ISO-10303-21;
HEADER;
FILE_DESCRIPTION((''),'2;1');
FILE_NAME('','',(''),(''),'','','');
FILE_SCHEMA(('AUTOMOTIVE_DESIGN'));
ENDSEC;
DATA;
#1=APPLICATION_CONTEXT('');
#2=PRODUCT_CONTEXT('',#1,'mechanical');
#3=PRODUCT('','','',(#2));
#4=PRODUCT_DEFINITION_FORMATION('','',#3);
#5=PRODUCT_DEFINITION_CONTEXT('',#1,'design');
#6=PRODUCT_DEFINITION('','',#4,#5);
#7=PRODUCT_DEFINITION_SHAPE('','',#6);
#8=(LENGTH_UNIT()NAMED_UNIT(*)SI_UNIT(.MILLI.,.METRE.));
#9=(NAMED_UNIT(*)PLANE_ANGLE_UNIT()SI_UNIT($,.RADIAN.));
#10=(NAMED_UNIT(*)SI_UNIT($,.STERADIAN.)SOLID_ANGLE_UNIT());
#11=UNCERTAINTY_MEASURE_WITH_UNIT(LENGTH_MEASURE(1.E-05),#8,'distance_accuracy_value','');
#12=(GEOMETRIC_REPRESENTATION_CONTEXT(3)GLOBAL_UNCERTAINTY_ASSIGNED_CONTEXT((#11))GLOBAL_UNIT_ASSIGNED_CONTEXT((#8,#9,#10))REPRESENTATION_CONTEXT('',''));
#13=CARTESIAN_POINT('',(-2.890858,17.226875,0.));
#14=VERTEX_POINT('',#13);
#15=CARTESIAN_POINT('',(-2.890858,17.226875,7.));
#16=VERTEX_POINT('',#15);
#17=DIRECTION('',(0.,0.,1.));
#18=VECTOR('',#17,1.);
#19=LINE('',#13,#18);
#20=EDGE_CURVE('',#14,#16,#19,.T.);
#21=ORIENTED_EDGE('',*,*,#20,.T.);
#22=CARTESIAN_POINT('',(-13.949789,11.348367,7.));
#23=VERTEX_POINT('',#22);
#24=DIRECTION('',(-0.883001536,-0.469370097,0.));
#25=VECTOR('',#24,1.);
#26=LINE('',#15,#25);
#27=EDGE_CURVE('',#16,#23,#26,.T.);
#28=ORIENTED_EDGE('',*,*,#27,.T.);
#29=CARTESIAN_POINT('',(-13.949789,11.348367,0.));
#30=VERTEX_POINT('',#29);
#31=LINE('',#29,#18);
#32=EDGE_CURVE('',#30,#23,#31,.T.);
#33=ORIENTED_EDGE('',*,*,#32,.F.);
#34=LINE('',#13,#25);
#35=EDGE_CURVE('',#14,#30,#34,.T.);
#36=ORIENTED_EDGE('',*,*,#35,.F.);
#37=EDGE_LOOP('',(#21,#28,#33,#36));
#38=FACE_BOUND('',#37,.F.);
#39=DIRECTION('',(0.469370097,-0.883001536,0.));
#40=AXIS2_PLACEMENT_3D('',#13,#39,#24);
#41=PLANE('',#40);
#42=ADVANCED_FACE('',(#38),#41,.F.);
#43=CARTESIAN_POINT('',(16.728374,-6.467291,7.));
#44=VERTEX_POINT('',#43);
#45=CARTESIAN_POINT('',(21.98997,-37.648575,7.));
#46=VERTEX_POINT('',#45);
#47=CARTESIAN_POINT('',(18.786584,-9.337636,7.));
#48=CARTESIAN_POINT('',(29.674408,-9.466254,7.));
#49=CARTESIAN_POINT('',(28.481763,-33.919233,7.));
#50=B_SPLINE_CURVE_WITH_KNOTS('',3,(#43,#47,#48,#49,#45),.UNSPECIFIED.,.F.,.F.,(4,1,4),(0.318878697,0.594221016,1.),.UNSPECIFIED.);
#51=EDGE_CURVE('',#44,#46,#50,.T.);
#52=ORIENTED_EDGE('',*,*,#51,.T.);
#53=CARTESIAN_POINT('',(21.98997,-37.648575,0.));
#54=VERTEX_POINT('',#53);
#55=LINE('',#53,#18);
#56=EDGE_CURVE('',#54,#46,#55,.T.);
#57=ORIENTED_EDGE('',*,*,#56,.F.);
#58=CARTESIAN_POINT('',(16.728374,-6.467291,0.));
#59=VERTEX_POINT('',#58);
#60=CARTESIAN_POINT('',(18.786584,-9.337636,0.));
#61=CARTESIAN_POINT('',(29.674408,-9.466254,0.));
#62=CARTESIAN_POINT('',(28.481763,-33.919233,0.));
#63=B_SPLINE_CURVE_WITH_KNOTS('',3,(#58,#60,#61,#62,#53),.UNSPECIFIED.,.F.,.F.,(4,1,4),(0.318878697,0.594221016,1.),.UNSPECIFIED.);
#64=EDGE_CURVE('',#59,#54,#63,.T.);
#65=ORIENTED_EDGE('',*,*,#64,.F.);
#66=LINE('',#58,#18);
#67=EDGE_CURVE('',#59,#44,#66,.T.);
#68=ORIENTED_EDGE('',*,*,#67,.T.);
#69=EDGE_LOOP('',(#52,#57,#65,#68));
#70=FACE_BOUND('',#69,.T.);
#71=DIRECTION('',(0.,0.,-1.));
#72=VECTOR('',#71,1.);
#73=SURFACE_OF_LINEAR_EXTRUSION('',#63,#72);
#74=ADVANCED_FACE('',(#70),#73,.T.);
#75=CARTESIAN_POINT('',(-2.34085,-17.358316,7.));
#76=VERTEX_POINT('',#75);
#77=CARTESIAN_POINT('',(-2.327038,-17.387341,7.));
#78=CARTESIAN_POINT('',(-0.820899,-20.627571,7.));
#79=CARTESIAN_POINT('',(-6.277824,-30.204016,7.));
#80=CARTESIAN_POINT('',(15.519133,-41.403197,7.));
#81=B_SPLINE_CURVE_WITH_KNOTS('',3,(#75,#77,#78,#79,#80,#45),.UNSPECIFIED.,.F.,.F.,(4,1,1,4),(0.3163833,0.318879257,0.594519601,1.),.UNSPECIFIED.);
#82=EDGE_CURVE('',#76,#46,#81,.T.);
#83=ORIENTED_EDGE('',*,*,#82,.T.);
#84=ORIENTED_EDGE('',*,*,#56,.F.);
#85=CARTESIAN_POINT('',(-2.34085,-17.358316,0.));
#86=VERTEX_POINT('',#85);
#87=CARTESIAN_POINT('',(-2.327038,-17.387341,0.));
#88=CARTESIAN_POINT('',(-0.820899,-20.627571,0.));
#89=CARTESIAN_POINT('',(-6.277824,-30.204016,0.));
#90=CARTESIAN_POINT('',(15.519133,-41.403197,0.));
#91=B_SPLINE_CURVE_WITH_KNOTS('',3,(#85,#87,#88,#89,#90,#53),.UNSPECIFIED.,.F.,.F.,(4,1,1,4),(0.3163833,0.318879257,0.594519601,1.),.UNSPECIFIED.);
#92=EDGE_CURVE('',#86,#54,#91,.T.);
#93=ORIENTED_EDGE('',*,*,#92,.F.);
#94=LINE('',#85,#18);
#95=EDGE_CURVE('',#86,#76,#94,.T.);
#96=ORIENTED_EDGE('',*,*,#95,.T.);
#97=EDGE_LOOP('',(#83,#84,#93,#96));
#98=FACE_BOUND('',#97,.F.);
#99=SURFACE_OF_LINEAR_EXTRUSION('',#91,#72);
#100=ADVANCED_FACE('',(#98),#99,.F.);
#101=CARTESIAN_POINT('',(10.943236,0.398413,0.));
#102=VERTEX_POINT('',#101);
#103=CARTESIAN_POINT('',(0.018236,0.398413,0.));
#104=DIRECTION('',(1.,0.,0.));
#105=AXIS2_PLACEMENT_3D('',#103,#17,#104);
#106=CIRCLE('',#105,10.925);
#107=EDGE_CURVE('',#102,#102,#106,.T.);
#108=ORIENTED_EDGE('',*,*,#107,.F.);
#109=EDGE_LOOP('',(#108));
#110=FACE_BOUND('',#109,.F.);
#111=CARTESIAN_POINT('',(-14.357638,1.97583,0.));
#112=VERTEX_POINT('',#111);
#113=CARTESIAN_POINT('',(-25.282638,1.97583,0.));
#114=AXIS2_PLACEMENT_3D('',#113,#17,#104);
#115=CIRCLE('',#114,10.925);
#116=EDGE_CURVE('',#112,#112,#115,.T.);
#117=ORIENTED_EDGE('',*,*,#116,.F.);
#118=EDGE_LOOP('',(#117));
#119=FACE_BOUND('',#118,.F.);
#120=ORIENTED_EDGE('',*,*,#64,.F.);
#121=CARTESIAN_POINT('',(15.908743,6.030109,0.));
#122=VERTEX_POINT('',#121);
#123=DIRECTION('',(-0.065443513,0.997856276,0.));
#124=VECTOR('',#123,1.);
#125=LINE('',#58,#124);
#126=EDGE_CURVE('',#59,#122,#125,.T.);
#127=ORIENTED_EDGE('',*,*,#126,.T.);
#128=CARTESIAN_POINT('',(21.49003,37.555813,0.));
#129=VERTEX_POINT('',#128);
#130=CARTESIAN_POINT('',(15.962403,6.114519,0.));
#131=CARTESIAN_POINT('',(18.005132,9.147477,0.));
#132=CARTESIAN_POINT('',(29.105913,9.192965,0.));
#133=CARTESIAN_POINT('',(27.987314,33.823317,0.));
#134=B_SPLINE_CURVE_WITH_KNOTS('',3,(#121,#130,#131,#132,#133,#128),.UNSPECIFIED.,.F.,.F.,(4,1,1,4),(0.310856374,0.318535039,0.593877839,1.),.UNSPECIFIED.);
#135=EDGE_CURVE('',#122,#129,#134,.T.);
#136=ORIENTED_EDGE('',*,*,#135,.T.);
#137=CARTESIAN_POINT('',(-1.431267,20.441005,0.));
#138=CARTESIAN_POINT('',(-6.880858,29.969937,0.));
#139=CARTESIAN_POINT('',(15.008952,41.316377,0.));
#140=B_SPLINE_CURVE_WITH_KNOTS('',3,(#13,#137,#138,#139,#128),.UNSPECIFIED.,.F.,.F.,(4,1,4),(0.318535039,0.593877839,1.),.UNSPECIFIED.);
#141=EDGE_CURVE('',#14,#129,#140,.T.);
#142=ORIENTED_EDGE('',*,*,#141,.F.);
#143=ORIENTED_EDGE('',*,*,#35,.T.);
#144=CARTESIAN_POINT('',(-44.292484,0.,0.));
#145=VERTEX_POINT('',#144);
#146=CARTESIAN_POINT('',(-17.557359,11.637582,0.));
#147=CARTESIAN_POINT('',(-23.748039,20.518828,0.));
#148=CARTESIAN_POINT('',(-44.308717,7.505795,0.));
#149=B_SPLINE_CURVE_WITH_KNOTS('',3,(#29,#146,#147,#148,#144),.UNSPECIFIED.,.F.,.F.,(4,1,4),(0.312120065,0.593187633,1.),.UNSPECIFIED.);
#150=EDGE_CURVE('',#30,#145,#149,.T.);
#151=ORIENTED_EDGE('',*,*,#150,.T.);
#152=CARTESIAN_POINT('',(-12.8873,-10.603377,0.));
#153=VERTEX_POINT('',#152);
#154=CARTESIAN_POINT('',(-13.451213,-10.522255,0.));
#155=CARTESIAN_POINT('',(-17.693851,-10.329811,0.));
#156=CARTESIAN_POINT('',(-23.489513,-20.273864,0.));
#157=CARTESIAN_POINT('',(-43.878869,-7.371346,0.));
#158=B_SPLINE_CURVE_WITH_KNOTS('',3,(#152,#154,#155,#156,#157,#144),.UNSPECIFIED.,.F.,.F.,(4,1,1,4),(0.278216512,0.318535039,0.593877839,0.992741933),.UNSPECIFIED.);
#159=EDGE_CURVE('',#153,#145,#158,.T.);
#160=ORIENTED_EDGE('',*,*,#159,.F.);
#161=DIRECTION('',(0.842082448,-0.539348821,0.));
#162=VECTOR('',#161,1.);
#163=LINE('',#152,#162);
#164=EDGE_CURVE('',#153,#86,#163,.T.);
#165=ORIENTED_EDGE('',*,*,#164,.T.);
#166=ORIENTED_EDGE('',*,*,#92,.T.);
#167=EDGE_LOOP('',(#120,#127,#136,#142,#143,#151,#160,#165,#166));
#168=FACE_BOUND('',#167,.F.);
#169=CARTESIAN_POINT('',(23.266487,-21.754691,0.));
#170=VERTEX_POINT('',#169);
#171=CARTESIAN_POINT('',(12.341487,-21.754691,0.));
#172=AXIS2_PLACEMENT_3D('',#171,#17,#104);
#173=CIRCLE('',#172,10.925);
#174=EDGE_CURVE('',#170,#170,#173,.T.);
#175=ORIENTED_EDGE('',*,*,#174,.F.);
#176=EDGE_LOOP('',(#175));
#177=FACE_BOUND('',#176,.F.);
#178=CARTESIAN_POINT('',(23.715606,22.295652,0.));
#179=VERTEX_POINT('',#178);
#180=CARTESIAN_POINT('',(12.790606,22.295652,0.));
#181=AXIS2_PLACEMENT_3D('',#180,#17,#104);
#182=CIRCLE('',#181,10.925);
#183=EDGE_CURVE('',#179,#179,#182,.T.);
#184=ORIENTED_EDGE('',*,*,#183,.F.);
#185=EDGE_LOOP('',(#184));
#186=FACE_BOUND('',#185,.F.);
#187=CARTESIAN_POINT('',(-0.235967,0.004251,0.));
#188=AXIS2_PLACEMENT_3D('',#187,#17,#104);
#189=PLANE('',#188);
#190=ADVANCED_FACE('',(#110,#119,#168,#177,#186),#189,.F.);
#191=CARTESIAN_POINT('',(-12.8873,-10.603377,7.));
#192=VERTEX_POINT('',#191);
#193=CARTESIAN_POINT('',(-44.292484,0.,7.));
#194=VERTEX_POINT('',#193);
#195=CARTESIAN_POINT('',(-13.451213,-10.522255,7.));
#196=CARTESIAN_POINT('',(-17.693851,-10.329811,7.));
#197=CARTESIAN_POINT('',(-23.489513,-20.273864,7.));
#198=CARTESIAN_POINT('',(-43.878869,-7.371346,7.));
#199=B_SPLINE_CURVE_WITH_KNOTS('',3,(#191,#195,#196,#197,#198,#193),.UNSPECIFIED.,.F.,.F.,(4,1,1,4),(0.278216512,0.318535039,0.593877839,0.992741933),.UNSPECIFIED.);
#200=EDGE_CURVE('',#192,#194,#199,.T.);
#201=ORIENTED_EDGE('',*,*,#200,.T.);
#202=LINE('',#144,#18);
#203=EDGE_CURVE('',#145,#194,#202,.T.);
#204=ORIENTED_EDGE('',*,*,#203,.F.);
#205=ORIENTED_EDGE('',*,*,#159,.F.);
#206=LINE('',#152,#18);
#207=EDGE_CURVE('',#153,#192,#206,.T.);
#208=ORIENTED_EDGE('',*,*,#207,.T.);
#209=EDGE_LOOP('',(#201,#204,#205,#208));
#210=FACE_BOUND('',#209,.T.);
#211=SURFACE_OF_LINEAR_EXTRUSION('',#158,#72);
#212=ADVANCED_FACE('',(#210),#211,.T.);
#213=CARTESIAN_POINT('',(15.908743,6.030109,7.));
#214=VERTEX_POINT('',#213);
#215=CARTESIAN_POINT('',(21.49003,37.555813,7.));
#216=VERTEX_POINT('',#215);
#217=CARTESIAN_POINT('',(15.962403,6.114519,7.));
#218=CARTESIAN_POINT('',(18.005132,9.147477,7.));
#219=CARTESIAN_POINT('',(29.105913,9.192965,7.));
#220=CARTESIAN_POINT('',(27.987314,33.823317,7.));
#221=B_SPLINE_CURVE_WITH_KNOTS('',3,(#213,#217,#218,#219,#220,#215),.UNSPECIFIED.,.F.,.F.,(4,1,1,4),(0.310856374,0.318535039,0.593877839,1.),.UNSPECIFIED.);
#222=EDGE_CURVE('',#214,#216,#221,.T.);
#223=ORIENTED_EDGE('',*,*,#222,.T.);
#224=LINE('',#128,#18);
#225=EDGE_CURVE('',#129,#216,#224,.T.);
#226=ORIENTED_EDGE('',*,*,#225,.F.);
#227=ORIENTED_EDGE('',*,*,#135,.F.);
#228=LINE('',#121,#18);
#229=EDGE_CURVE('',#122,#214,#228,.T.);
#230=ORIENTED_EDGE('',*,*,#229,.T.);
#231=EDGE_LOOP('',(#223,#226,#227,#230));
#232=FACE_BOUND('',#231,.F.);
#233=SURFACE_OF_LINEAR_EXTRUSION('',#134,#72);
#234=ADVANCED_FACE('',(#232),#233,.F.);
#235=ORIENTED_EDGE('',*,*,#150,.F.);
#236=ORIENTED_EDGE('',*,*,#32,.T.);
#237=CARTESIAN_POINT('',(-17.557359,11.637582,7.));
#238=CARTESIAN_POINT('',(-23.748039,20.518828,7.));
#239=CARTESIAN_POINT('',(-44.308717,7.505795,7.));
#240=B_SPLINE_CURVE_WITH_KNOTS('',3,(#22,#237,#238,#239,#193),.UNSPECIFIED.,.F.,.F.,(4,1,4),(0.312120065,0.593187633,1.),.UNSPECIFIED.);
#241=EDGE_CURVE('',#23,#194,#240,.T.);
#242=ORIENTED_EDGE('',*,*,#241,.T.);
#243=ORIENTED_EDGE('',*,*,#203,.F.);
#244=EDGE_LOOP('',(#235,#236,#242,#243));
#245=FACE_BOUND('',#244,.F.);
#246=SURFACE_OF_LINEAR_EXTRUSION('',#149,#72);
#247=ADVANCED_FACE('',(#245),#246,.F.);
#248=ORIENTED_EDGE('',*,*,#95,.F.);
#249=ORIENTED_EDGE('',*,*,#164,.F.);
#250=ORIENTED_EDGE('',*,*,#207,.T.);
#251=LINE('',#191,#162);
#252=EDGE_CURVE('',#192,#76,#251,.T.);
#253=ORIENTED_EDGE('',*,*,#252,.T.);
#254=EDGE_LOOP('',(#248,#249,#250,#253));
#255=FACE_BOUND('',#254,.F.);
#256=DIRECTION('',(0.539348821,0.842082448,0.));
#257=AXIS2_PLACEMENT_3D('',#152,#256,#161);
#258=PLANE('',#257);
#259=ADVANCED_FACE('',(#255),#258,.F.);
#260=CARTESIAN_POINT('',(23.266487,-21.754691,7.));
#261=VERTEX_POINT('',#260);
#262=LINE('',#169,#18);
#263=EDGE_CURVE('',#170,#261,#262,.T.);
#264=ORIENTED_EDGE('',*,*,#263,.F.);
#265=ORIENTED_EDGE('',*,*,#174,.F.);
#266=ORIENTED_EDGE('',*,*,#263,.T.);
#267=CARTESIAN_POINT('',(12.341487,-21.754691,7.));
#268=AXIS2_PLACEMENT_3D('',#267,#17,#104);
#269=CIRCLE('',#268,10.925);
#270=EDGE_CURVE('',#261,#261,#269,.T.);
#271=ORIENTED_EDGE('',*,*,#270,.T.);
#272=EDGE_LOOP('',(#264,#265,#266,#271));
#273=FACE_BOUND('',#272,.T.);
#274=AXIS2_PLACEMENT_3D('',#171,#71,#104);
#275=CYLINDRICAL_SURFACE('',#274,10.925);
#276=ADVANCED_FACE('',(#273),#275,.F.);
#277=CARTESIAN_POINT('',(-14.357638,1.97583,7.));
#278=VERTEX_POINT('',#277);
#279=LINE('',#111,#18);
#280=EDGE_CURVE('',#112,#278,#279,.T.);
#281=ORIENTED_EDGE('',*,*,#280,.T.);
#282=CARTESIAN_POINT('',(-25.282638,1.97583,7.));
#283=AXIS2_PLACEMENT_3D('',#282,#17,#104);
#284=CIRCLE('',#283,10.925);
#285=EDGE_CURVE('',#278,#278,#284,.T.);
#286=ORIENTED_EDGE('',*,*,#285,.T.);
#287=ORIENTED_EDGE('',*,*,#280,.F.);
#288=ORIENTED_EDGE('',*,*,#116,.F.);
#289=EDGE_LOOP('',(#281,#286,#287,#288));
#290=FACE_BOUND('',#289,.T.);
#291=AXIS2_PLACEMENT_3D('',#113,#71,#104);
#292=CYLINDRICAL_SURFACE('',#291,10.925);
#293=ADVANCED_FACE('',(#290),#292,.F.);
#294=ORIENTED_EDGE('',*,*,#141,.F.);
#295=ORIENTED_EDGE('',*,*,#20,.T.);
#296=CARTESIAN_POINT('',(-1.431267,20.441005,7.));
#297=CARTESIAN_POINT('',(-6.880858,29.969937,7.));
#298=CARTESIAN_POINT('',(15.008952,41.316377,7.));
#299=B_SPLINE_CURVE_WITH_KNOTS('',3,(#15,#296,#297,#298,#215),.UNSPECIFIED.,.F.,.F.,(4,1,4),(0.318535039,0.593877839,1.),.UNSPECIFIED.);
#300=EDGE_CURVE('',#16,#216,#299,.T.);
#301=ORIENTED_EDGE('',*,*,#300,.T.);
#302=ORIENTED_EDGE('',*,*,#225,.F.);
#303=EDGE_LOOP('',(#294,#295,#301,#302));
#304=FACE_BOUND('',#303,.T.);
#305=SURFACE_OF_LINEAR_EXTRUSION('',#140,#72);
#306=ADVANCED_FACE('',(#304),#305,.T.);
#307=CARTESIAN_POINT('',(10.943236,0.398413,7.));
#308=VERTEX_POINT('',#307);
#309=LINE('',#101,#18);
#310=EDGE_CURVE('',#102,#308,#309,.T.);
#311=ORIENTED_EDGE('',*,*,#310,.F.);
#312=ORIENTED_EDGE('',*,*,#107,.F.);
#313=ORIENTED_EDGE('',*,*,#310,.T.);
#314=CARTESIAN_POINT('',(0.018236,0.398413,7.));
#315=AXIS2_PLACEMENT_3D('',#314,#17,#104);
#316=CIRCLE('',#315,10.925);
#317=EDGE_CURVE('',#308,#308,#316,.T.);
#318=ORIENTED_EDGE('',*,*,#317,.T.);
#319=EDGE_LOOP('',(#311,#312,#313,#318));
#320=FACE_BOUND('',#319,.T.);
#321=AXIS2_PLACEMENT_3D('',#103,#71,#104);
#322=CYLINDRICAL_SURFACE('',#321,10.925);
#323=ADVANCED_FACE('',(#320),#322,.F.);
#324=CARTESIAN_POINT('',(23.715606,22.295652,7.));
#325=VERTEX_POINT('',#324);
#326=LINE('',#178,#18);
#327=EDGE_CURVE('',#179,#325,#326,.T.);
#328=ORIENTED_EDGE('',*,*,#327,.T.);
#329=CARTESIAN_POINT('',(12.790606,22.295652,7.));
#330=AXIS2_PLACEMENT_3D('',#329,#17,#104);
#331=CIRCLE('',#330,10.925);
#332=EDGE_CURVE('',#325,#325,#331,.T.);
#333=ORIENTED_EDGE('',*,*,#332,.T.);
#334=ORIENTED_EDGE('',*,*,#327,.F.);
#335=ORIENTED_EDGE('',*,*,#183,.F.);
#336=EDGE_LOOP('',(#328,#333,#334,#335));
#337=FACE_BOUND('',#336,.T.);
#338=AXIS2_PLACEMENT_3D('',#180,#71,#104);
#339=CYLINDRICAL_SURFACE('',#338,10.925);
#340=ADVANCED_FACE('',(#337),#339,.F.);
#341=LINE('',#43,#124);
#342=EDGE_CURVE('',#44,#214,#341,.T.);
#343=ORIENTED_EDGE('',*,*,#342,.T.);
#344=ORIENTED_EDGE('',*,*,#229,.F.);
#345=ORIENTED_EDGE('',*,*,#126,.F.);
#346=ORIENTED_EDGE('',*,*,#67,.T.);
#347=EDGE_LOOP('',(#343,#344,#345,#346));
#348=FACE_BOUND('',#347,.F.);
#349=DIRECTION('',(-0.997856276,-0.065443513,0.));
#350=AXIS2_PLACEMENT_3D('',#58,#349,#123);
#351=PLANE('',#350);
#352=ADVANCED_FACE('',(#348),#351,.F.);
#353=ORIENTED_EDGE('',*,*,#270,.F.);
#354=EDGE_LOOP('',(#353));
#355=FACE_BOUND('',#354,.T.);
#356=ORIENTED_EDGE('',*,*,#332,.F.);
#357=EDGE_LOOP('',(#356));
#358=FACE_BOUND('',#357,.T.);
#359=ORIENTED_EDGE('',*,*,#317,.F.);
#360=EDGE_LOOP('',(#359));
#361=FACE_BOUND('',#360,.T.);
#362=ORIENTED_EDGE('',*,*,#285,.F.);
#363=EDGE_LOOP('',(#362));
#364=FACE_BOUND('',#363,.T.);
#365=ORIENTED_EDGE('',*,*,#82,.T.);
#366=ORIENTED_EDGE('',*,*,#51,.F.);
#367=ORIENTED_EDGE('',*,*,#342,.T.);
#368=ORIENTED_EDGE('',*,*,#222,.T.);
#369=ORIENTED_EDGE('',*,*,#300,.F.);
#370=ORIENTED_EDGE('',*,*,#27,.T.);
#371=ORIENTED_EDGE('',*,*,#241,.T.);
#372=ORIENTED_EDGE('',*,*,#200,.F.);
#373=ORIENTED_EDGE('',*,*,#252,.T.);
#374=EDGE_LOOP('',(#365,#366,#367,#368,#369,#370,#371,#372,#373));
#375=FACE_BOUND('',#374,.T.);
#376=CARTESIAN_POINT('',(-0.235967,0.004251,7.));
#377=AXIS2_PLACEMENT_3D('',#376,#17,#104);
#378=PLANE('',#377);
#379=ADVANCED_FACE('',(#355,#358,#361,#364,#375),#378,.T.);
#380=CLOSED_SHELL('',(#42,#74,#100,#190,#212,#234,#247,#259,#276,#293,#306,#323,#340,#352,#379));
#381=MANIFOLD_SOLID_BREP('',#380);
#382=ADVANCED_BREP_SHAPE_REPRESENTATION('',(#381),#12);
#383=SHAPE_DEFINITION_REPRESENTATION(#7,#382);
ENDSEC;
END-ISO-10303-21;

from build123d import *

# Parameters (mm, degrees)
F0_R     = 10.925
F1_DEPTH = 7


with BuildPart() as f1:
    # F0 (on Top) → F1 (new body)
    with BuildSketch(Plane.XY):
        with BuildLine():
            add(Edge.make_bspline(
                [(-6.4395543964, 13.2348172529), (-9.1292198143, 12.2456790048), (-11.7414815686, 11.1713296384), (-13.9497888892, 11.3483672356)],
                knots=[0.1400697691, 0.1400697691, 0.1400697691, 0.1400697691, 0.3121200653, 0.3121200653, 0.3121200653, 0.3121200653], degree=3))
            add(Edge.make_bspline(
                [(-13.9497888892, 11.3483672356), (-17.5573593522, 11.6375822379), (-23.7480393822, 20.5188284103), (-44.3087168864, 7.5057952096), (-44.2924838881, 0)],
                knots=[0.3121200653, 0.3121200653, 0.3121200653, 0.3121200653, 0.5931876328, 1, 1, 1, 1], degree=3))
            add(Edge.make_bspline(
                [(-12.887299612, -10.6033772899), (-13.4512132627, -10.5222545013), (-17.6938513535, -10.3298112003), (-23.4895130797, -20.2738643689), (-43.8788694911, -7.371346434), (-44.2924838881, 0)],
                knots=[0.278216512, 0.278216512, 0.278216512, 0.278216512, 0.3185350392, 0.5938778395, 0.9927419326, 0.9927419326, 0.9927419326, 0.9927419326], degree=3))
            add(Edge.make_bspline(
                [(-7.0311428775, -12.4986186093), (-9.0891121607, -11.6866108154), (-11.0989087543, -10.8606493977), (-12.887299612, -10.6033772899)],
                knots=[0.1503506848, 0.1503506848, 0.1503506848, 0.1503506848, 0.278216512, 0.278216512, 0.278216512, 0.278216512], degree=3))
            add(Edge.make_bspline(
                [(-7.0311428775, -12.4986186093), (-5.0355845098, -14.0840137015), (-3.1635826547, -15.6293105857), (-2.3408499564, -17.3583158347)],
                knots=[0.1677034297, 0.1677034297, 0.1677034297, 0.1677034297, 0.3163832996, 0.3163832996, 0.3163832996, 0.3163832996], degree=3))
            add(Edge.make_bspline(
                [(-2.3408499564, -17.3583158347), (-2.327038362, -17.3873414455), (-0.8208991693, -20.6275709181), (-6.2778244318, -30.204015976), (15.5191329345, -41.4031973523), (21.9899696205, -37.6485751695)],
                knots=[0.3163832996, 0.3163832996, 0.3163832996, 0.3163832996, 0.3188792574, 0.594519601, 1, 1, 1, 1], degree=3))
            add(Edge.make_bspline(
                [(16.7283741857, -6.4672911408), (18.786584329, -9.3376357175), (29.6744078467, -9.4662536369), (28.481763025, -33.9192331377), (21.9899696205, -37.6485751695)],
                knots=[0.3188786975, 0.3188786975, 0.3188786975, 0.3188786975, 0.5942210158, 1, 1, 1, 1], degree=3))
            add(Edge.make_bspline(
                [(14.5053291097, 1.8450627629), (15.0185483744, -1.3196723959), (15.3415537221, -4.5332551), (16.7283741857, -6.4672911408)],
                knots=[0.1333532483, 0.1333532483, 0.1333532483, 0.1333532483, 0.3188786975, 0.3188786975, 0.3188786975, 0.3188786975], degree=3))
            add(Edge.make_bspline(
                [(14.5053291097, 1.8450627629), (14.8069082277, 3.4605447135), (15.20732089, 4.9267216062), (15.9087433766, 6.0301086055)],
                knots=[0.2104833034, 0.2104833034, 0.2104833034, 0.2104833034, 0.3108563735, 0.3108563735, 0.3108563735, 0.3108563735], degree=3))
            add(Edge.make_bspline(
                [(15.9087433766, 6.0301086055), (15.9624030761, 6.1145190941), (18.0051316038, 9.1474766545), (29.1059131262, 9.1929649799), (27.9873138953, 33.8233167393), (21.4900302358, 37.5558127591)],
                knots=[0.3108563735, 0.3108563735, 0.3108563735, 0.3108563735, 0.3185350392, 0.5938778395, 1, 1, 1, 1], degree=3))
            add(Edge.make_bspline(
                [(-2.8908584222, 17.2268748699), (-1.431266538, 20.4410048292), (-6.8808579099, 29.9699369249), (15.0089520333, 41.316377454), (21.4900302358, 37.5558127591)],
                knots=[0.3185350392, 0.3185350392, 0.3185350392, 0.3185350392, 0.5938778395, 1, 1, 1, 1], degree=3))
            add(Edge.make_bspline(
                [(-6.4395543964, 13.2348172529), (-4.8831854727, 14.5225004957), (-3.5328470445, 15.8131681433), (-2.8908584222, 17.2268748699)],
                knots=[0.197427936, 0.197427936, 0.197427936, 0.197427936, 0.3185350392, 0.3185350392, 0.3185350392, 0.3185350392], degree=3))
        make_face()
        with Locations((12.3414872441, -21.7546906004)):
            Circle(F0_R, mode=Mode.SUBTRACT)
        with Locations((0.018236467, 0.3984128004)):
            Circle(F0_R, mode=Mode.SUBTRACT)
        with Locations((-25.2826381154, 1.9758301096)):
            Circle(F0_R, mode=Mode.SUBTRACT)
        with Locations((12.7906060968, 22.2956517596)):
            Circle(F0_R, mode=Mode.SUBTRACT)
        with BuildLine():
            Line((-2.8908584222, 17.2268748699), (-13.9497888892, 11.3483672356))
            add(Edge.make_bspline(
                [(-6.4395543964, 13.2348172529), (-9.1292198143, 12.2456790048), (-11.7414815686, 11.1713296384), (-13.9497888892, 11.3483672356)],
                knots=[0.1400697691, 0.1400697691, 0.1400697691, 0.1400697691, 0.3121200653, 0.3121200653, 0.3121200653, 0.3121200653], degree=3))
            add(Edge.make_bspline(
                [(-6.4395543964, 13.2348172529), (-4.8831854727, 14.5225004957), (-3.5328470445, 15.8131681433), (-2.8908584222, 17.2268748699)],
                knots=[0.197427936, 0.197427936, 0.197427936, 0.197427936, 0.3185350392, 0.3185350392, 0.3185350392, 0.3185350392], degree=3))
        make_face()
        with BuildLine():
            add(Edge.make_bspline(
                [(-7.0311428775, -12.4986186093), (-9.0891121607, -11.6866108154), (-11.0989087543, -10.8606493977), (-12.887299612, -10.6033772899)],
                knots=[0.1503506848, 0.1503506848, 0.1503506848, 0.1503506848, 0.278216512, 0.278216512, 0.278216512, 0.278216512], degree=3))
            Line((-12.887299612, -10.6033772899), (-2.3408499564, -17.3583158347))
            add(Edge.make_bspline(
                [(-7.0311428775, -12.4986186093), (-5.0355845098, -14.0840137015), (-3.1635826547, -15.6293105857), (-2.3408499564, -17.3583158347)],
                knots=[0.1677034297, 0.1677034297, 0.1677034297, 0.1677034297, 0.3163832996, 0.3163832996, 0.3163832996, 0.3163832996], degree=3))
        make_face()
        with BuildLine():
            Line((16.7283741857, -6.4672911408), (15.9087433766, 6.0301086055))
            add(Edge.make_bspline(
                [(14.5053291097, 1.8450627629), (14.8069082277, 3.4605447135), (15.20732089, 4.9267216062), (15.9087433766, 6.0301086055)],
                knots=[0.2104833034, 0.2104833034, 0.2104833034, 0.2104833034, 0.3108563735, 0.3108563735, 0.3108563735, 0.3108563735], degree=3))
            add(Edge.make_bspline(
                [(14.5053291097, 1.8450627629), (15.0185483744, -1.3196723959), (15.3415537221, -4.5332551), (16.7283741857, -6.4672911408)],
                knots=[0.1333532483, 0.1333532483, 0.1333532483, 0.1333532483, 0.3188786975, 0.3188786975, 0.3188786975, 0.3188786975], degree=3))
        make_face()
    extrude(amount=F1_DEPTH)


solid = f1.part
